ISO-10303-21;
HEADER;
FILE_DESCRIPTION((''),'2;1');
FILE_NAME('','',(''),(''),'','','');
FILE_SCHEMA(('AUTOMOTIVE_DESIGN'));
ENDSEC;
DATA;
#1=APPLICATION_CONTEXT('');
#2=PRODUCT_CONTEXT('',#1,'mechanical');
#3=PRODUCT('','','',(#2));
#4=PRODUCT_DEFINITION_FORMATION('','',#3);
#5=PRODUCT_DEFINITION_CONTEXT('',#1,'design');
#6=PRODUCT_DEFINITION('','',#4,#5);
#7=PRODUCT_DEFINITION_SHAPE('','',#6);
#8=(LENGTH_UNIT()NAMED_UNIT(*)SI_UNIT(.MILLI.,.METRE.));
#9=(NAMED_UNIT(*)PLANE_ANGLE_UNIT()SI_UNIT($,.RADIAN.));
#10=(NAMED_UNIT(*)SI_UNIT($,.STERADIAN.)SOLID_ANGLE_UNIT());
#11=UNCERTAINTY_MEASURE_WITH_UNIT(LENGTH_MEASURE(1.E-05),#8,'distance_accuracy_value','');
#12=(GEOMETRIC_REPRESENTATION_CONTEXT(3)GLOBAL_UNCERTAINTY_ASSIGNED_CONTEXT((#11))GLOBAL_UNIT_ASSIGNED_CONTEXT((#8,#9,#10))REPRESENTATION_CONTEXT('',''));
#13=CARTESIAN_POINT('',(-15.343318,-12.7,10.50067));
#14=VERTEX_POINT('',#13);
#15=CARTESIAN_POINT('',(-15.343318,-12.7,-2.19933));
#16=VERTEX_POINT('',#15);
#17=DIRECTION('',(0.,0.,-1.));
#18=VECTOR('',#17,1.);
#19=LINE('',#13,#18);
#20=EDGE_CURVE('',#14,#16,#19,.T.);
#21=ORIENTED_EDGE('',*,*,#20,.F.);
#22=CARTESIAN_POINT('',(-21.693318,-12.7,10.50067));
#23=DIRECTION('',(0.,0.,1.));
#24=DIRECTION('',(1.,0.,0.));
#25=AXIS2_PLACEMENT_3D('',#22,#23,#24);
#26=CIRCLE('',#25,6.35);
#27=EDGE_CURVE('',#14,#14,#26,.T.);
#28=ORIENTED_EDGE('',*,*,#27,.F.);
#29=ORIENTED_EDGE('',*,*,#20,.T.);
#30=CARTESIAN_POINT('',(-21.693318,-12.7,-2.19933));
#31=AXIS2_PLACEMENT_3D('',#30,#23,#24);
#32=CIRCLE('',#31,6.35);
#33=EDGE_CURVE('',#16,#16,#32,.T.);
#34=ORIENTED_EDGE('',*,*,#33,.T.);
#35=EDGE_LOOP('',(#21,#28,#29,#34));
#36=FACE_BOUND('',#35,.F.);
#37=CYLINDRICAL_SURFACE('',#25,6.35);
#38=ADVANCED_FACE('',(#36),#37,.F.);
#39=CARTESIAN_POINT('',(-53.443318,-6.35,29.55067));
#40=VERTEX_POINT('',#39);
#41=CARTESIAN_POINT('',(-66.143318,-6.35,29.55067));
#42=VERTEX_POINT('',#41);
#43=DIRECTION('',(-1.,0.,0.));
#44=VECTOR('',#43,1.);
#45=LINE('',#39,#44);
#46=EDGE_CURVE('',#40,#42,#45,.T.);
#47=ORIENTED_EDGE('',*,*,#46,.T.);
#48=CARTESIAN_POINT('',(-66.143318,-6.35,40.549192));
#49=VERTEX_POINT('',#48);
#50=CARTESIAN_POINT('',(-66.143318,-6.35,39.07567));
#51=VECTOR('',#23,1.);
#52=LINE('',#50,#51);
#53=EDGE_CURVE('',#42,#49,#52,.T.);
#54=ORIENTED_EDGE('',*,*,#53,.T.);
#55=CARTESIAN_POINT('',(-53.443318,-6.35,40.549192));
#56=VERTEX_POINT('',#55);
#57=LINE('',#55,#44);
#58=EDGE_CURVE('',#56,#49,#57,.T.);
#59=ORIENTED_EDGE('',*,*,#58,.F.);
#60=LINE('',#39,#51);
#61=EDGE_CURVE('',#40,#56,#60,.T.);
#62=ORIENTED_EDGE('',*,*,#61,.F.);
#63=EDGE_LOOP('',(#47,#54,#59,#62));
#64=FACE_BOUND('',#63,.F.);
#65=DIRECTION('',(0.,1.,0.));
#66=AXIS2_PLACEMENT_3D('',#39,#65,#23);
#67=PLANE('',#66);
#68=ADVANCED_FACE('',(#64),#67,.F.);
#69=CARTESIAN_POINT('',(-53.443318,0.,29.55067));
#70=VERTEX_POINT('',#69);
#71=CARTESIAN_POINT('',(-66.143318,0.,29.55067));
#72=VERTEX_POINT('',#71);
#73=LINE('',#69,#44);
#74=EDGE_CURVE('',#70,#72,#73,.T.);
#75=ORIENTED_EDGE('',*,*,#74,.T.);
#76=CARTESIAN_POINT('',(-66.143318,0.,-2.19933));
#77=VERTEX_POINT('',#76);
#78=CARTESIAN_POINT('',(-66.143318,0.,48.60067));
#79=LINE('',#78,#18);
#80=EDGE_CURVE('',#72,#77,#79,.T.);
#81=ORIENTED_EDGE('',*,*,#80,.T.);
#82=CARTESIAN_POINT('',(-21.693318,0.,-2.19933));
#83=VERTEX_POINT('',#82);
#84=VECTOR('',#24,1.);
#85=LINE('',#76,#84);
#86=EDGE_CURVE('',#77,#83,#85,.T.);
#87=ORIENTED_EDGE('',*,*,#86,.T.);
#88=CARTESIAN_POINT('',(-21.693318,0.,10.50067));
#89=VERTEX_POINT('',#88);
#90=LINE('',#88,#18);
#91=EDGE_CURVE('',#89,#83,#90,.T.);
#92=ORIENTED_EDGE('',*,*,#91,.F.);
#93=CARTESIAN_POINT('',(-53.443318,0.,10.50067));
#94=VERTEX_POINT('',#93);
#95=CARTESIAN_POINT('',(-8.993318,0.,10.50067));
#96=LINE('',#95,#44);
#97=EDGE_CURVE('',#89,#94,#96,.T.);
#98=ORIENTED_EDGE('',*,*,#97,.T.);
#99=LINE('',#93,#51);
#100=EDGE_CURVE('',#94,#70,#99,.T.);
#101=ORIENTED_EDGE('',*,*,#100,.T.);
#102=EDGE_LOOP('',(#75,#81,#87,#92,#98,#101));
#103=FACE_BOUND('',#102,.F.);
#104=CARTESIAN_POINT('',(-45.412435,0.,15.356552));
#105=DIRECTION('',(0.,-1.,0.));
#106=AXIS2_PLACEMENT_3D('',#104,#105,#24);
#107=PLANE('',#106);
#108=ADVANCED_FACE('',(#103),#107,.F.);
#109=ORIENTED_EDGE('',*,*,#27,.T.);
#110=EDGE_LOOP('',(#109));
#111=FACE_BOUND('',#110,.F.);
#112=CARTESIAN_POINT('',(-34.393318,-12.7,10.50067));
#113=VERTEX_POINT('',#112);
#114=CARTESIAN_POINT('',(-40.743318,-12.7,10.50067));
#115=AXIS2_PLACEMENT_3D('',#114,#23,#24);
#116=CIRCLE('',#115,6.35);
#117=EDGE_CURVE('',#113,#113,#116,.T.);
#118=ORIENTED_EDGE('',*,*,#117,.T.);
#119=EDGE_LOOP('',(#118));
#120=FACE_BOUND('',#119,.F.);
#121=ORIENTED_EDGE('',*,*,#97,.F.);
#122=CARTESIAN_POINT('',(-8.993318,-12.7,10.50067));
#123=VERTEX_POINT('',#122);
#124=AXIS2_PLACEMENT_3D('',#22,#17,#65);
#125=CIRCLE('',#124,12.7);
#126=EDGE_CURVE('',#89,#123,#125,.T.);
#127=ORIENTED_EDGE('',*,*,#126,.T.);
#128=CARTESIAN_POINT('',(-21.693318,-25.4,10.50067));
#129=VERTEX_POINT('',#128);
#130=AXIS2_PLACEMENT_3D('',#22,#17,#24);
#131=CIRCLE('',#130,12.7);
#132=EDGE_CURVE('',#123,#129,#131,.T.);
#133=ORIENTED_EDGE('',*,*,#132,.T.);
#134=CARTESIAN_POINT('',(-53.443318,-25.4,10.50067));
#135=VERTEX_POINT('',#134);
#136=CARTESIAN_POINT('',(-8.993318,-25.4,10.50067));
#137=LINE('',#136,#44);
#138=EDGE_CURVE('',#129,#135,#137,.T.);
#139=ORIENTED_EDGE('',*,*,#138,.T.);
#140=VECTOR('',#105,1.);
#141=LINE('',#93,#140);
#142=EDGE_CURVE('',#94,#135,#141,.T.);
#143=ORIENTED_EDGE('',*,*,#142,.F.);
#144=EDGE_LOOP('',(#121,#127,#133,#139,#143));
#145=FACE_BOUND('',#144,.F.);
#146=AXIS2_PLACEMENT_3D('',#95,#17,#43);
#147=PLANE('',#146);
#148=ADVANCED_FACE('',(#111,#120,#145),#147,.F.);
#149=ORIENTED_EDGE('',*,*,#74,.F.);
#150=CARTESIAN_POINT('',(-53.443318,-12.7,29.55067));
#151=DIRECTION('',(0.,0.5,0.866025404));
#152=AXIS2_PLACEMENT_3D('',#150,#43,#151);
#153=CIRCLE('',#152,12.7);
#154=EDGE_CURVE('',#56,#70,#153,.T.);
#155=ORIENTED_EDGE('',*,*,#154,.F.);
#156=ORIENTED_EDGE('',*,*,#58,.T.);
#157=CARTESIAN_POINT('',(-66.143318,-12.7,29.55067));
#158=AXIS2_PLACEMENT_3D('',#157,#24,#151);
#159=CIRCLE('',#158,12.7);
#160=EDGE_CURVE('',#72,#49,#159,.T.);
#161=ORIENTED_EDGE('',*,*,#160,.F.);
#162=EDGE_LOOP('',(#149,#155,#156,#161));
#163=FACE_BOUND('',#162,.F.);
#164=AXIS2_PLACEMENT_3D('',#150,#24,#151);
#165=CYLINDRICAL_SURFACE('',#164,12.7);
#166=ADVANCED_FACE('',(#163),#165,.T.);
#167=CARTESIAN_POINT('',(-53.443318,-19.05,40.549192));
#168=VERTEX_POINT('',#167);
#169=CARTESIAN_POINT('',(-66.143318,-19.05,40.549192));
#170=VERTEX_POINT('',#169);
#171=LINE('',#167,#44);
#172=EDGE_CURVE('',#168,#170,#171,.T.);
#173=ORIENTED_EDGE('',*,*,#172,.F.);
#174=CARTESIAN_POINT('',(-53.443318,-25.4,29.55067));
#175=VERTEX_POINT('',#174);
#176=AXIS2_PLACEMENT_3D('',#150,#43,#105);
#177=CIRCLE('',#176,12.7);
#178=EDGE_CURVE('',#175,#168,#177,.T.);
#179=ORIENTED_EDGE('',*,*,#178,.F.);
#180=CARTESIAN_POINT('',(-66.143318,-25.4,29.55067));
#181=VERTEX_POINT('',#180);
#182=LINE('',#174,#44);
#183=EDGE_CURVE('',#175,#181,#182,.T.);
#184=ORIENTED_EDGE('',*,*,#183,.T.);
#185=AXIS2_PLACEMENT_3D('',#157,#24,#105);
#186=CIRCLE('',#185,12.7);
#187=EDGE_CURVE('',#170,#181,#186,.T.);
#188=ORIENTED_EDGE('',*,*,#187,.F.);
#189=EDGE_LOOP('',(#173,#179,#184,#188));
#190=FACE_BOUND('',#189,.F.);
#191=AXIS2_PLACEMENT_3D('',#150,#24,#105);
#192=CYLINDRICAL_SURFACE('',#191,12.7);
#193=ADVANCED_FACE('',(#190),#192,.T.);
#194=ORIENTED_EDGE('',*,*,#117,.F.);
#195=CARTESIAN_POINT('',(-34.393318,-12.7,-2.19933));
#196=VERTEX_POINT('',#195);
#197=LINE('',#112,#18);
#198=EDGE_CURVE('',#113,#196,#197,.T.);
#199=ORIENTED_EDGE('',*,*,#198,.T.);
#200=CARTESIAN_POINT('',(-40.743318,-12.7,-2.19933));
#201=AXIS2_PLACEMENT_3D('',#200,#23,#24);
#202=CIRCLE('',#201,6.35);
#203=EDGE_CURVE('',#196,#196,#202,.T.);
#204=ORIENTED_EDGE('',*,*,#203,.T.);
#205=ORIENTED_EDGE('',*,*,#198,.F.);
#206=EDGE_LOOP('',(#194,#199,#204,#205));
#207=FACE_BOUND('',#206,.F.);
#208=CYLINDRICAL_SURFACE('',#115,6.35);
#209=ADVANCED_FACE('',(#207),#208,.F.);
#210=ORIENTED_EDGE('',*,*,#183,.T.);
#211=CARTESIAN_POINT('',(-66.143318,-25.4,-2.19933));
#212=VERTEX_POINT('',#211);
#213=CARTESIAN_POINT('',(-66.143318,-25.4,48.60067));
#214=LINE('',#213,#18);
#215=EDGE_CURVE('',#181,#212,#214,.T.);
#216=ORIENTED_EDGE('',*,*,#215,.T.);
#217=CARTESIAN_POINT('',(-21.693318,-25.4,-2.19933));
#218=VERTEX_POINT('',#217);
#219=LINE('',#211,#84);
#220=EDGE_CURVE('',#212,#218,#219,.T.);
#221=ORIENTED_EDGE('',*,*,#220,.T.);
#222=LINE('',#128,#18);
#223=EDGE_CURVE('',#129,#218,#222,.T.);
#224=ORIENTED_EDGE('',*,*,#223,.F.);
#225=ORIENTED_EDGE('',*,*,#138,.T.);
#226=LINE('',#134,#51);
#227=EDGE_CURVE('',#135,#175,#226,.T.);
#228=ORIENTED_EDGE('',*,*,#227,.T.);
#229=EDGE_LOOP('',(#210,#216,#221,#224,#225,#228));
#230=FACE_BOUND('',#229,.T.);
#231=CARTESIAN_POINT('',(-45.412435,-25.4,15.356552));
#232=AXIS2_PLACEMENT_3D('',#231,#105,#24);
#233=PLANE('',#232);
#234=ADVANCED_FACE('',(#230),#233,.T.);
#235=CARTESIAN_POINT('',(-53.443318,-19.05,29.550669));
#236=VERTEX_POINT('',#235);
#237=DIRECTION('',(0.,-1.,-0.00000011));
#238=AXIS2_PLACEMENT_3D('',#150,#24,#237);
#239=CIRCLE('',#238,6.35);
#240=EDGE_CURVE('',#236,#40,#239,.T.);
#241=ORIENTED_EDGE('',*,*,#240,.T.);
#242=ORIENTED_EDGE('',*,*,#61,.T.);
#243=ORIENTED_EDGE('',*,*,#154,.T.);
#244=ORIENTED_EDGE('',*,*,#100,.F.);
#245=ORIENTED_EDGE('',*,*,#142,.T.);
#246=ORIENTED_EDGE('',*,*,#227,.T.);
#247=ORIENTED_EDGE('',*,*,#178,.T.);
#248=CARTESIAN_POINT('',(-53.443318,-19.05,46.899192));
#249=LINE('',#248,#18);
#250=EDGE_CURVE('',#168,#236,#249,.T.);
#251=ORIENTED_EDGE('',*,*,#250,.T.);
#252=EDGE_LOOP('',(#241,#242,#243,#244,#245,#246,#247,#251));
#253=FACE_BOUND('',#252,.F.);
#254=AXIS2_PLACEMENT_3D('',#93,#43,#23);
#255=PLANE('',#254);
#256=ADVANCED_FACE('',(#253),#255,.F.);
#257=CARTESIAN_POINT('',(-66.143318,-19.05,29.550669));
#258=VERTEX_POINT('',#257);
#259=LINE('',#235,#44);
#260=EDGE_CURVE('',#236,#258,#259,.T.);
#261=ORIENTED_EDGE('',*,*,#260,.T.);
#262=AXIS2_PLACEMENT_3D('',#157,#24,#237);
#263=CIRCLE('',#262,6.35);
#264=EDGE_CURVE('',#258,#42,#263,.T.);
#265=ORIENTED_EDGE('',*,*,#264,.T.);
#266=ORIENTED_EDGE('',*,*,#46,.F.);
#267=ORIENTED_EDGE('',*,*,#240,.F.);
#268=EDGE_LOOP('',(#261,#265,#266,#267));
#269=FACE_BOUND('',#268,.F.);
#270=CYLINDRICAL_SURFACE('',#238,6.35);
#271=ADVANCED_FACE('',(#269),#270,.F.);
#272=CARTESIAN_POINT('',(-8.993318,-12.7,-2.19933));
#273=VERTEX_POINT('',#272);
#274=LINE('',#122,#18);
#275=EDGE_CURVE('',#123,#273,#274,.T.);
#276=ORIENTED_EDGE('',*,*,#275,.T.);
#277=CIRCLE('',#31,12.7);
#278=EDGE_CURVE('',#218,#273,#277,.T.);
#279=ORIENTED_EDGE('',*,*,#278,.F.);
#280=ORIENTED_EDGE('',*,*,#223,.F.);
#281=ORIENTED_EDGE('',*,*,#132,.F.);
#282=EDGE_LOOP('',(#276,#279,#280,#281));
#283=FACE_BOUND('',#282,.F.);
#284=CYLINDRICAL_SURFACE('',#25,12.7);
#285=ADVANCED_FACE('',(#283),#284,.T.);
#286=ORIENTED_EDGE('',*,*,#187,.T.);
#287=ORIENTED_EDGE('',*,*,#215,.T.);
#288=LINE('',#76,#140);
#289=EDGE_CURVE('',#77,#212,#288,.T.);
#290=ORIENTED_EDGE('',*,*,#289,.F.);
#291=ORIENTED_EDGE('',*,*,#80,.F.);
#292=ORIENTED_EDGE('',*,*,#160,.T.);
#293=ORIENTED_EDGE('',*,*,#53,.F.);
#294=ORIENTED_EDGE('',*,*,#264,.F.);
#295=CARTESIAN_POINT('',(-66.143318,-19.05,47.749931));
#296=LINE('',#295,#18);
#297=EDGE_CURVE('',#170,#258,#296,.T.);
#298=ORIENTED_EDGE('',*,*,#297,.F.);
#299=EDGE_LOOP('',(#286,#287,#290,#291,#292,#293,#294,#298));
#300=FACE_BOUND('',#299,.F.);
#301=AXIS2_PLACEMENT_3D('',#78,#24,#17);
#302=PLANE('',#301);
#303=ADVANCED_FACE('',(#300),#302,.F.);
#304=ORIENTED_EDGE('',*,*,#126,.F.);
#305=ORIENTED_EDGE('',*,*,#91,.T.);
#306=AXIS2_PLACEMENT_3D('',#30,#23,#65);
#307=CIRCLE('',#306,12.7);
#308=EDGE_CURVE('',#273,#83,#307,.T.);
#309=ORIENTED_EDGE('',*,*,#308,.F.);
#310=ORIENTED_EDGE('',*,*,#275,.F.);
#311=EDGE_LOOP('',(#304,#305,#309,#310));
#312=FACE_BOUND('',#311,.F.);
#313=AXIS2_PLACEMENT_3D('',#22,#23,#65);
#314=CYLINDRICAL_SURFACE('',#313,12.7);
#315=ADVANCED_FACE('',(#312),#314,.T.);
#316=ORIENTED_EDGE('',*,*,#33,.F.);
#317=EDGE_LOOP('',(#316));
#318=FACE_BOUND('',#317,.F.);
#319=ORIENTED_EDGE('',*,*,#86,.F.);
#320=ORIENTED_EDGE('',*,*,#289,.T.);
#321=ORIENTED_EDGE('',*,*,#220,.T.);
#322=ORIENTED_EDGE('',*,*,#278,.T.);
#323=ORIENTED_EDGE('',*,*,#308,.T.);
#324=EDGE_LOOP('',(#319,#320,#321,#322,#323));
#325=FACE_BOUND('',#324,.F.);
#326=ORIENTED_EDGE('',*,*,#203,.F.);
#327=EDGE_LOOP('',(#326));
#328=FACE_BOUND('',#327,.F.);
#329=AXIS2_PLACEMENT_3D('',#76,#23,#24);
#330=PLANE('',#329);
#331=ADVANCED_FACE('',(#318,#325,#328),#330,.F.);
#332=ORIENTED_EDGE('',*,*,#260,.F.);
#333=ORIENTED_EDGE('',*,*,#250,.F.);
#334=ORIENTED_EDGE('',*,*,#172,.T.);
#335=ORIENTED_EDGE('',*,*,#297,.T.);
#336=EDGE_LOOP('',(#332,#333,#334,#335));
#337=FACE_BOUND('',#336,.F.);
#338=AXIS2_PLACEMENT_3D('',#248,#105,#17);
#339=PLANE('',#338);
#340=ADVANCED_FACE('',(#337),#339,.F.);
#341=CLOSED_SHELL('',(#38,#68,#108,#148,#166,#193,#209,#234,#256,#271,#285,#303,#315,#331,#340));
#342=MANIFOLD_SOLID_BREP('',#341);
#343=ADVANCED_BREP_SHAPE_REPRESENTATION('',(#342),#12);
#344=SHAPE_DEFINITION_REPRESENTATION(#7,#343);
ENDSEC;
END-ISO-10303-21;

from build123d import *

# Parameters (mm, degrees)
F1_DEPTH  = 25.4
F3_DEPTH  = 25.4
F5_DEPTH  = 25.4
F6_R      = 6.35
F7_DEPTH  = 25.4
F9_DEPTH  = 25.4
F11_DEPTH = 25.4


with BuildPart() as f1:
    # F0 (on Front) → F1 (new body)
    with BuildSketch(Plane.XZ):
        Polygon((-53.4433176321, 48.6006695512), (-66.1433176321, 48.6006695512), (-66.1433176321, -2.1993304488), (-8.9933176321, -2.1993304488), (-8.9933176321, 10.5006695512), (-53.4433176321, 10.5006695512), align=None)
    extrude(amount=F1_DEPTH)

    # F2 (on face) → F3 (cut)
    with BuildSketch(Plane.YZ.offset(-53.4433176321)):
        with BuildLine():
            ThreePointArc((-25.4, 35.9006695512), (-21.6802561211, 44.8809256722), (-12.7, 48.6006695512))
            Line((-12.7, 48.6006695512), (-25.4, 48.6006695512))
            Line((-25.4, 48.6006695512), (-25.4, 35.9006695512))
        make_face()
        with BuildLine():
            ThreePointArc((-12.7, 48.6006695512), (-3.7197438789, 44.8809256722), (0, 35.9006695512))
            Line((0, 35.9006695512), (0, 48.6006695512))
            Line((0, 48.6006695512), (-12.7, 48.6006695512))
        make_face()
    extrude(amount=-F3_DEPTH, mode=Mode.SUBTRACT)

    # F4 (on face) → F5 (cut)
    with BuildSketch(Plane.YZ.offset(-53.4433176321)):
        with BuildLine():
            Line((-19.05, 46.8991921792), (-19.05, 29.5506688558))
            ThreePointArc((-19.05, 29.5506688558), (-12.6999996523, 23.2006695512), (-6.35, 29.5506695512))
            Line((-6.35, 29.5506695512), (-6.35, 46.8991921792))
            ThreePointArc((-6.35, 46.8991921792), (-12.7, 48.6006695512), (-19.05, 46.8991921792))
        make_face()
    extrude(amount=-F5_DEPTH, mode=Mode.SUBTRACT)

    # F6 (on face) → F7 (cut)
    with BuildSketch(Plane.XY.offset(10.5006695512)):
        with Locations((-21.6933176321, -12.7)):
            Circle(F6_R)
        with Locations((-40.7433176321, -12.7)):
            Circle(F6_R)
    extrude(amount=-F7_DEPTH, mode=Mode.SUBTRACT)

    # F8 (on face) → F9 (cut)
    with BuildSketch(Plane.XY.offset(10.5006695512)):
        with BuildLine():
            ThreePointArc((-21.6933176321, 0), (-12.713061511, -3.7197438789), (-8.9933176321, -12.7))
            Line((-8.9933176321, -12.7), (-8.9933176321, 0))
            Line((-8.9933176321, 0), (-21.6933176321, 0))
        make_face()
        with BuildLine():
            ThreePointArc((-8.9933176321, -12.7), (-12.713061511, -21.6802561211), (-21.6933176321, -25.4))
            Line((-21.6933176321, -25.4), (-8.9933176321, -25.4))
            Line((-8.9933176321, -25.4), (-8.9933176321, -12.7))
        make_face()
    extrude(amount=-F9_DEPTH, mode=Mode.SUBTRACT)

    # F10 (on face) → F11 (cut)
    with BuildSketch(Plane.YZ.offset(-53.4433176321)):
        with BuildLine():
            ThreePointArc((-25.4, 29.5506695512), (-23.6985226281, 35.9006695512), (-19.05, 40.5491921792))
            Line((-19.05, 40.5491921792), (-19.05, 46.8991921792))
            ThreePointArc((-19.05, 46.8991921792), (-23.6985226281, 42.2506695512), (-25.4, 35.9006695512))
            Line((-25.4, 35.9006695512), (-25.4, 29.5506695512))
        make_face()
        with BuildLine():
            ThreePointArc((-6.35, 40.5491921792), (-1.7014773719, 35.9006695512), (0, 29.5506695512))
            Line((0, 29.5506695512), (0, 35.9006695512))
            ThreePointArc((0, 35.9006695512), (-1.7014773719, 42.2506695512), (-6.35, 46.8991921792))
            Line((-6.35, 46.8991921792), (-6.35, 40.5491921792))
        make_face()
    extrude(amount=-F11_DEPTH, mode=Mode.SUBTRACT)


solid = f1.part
